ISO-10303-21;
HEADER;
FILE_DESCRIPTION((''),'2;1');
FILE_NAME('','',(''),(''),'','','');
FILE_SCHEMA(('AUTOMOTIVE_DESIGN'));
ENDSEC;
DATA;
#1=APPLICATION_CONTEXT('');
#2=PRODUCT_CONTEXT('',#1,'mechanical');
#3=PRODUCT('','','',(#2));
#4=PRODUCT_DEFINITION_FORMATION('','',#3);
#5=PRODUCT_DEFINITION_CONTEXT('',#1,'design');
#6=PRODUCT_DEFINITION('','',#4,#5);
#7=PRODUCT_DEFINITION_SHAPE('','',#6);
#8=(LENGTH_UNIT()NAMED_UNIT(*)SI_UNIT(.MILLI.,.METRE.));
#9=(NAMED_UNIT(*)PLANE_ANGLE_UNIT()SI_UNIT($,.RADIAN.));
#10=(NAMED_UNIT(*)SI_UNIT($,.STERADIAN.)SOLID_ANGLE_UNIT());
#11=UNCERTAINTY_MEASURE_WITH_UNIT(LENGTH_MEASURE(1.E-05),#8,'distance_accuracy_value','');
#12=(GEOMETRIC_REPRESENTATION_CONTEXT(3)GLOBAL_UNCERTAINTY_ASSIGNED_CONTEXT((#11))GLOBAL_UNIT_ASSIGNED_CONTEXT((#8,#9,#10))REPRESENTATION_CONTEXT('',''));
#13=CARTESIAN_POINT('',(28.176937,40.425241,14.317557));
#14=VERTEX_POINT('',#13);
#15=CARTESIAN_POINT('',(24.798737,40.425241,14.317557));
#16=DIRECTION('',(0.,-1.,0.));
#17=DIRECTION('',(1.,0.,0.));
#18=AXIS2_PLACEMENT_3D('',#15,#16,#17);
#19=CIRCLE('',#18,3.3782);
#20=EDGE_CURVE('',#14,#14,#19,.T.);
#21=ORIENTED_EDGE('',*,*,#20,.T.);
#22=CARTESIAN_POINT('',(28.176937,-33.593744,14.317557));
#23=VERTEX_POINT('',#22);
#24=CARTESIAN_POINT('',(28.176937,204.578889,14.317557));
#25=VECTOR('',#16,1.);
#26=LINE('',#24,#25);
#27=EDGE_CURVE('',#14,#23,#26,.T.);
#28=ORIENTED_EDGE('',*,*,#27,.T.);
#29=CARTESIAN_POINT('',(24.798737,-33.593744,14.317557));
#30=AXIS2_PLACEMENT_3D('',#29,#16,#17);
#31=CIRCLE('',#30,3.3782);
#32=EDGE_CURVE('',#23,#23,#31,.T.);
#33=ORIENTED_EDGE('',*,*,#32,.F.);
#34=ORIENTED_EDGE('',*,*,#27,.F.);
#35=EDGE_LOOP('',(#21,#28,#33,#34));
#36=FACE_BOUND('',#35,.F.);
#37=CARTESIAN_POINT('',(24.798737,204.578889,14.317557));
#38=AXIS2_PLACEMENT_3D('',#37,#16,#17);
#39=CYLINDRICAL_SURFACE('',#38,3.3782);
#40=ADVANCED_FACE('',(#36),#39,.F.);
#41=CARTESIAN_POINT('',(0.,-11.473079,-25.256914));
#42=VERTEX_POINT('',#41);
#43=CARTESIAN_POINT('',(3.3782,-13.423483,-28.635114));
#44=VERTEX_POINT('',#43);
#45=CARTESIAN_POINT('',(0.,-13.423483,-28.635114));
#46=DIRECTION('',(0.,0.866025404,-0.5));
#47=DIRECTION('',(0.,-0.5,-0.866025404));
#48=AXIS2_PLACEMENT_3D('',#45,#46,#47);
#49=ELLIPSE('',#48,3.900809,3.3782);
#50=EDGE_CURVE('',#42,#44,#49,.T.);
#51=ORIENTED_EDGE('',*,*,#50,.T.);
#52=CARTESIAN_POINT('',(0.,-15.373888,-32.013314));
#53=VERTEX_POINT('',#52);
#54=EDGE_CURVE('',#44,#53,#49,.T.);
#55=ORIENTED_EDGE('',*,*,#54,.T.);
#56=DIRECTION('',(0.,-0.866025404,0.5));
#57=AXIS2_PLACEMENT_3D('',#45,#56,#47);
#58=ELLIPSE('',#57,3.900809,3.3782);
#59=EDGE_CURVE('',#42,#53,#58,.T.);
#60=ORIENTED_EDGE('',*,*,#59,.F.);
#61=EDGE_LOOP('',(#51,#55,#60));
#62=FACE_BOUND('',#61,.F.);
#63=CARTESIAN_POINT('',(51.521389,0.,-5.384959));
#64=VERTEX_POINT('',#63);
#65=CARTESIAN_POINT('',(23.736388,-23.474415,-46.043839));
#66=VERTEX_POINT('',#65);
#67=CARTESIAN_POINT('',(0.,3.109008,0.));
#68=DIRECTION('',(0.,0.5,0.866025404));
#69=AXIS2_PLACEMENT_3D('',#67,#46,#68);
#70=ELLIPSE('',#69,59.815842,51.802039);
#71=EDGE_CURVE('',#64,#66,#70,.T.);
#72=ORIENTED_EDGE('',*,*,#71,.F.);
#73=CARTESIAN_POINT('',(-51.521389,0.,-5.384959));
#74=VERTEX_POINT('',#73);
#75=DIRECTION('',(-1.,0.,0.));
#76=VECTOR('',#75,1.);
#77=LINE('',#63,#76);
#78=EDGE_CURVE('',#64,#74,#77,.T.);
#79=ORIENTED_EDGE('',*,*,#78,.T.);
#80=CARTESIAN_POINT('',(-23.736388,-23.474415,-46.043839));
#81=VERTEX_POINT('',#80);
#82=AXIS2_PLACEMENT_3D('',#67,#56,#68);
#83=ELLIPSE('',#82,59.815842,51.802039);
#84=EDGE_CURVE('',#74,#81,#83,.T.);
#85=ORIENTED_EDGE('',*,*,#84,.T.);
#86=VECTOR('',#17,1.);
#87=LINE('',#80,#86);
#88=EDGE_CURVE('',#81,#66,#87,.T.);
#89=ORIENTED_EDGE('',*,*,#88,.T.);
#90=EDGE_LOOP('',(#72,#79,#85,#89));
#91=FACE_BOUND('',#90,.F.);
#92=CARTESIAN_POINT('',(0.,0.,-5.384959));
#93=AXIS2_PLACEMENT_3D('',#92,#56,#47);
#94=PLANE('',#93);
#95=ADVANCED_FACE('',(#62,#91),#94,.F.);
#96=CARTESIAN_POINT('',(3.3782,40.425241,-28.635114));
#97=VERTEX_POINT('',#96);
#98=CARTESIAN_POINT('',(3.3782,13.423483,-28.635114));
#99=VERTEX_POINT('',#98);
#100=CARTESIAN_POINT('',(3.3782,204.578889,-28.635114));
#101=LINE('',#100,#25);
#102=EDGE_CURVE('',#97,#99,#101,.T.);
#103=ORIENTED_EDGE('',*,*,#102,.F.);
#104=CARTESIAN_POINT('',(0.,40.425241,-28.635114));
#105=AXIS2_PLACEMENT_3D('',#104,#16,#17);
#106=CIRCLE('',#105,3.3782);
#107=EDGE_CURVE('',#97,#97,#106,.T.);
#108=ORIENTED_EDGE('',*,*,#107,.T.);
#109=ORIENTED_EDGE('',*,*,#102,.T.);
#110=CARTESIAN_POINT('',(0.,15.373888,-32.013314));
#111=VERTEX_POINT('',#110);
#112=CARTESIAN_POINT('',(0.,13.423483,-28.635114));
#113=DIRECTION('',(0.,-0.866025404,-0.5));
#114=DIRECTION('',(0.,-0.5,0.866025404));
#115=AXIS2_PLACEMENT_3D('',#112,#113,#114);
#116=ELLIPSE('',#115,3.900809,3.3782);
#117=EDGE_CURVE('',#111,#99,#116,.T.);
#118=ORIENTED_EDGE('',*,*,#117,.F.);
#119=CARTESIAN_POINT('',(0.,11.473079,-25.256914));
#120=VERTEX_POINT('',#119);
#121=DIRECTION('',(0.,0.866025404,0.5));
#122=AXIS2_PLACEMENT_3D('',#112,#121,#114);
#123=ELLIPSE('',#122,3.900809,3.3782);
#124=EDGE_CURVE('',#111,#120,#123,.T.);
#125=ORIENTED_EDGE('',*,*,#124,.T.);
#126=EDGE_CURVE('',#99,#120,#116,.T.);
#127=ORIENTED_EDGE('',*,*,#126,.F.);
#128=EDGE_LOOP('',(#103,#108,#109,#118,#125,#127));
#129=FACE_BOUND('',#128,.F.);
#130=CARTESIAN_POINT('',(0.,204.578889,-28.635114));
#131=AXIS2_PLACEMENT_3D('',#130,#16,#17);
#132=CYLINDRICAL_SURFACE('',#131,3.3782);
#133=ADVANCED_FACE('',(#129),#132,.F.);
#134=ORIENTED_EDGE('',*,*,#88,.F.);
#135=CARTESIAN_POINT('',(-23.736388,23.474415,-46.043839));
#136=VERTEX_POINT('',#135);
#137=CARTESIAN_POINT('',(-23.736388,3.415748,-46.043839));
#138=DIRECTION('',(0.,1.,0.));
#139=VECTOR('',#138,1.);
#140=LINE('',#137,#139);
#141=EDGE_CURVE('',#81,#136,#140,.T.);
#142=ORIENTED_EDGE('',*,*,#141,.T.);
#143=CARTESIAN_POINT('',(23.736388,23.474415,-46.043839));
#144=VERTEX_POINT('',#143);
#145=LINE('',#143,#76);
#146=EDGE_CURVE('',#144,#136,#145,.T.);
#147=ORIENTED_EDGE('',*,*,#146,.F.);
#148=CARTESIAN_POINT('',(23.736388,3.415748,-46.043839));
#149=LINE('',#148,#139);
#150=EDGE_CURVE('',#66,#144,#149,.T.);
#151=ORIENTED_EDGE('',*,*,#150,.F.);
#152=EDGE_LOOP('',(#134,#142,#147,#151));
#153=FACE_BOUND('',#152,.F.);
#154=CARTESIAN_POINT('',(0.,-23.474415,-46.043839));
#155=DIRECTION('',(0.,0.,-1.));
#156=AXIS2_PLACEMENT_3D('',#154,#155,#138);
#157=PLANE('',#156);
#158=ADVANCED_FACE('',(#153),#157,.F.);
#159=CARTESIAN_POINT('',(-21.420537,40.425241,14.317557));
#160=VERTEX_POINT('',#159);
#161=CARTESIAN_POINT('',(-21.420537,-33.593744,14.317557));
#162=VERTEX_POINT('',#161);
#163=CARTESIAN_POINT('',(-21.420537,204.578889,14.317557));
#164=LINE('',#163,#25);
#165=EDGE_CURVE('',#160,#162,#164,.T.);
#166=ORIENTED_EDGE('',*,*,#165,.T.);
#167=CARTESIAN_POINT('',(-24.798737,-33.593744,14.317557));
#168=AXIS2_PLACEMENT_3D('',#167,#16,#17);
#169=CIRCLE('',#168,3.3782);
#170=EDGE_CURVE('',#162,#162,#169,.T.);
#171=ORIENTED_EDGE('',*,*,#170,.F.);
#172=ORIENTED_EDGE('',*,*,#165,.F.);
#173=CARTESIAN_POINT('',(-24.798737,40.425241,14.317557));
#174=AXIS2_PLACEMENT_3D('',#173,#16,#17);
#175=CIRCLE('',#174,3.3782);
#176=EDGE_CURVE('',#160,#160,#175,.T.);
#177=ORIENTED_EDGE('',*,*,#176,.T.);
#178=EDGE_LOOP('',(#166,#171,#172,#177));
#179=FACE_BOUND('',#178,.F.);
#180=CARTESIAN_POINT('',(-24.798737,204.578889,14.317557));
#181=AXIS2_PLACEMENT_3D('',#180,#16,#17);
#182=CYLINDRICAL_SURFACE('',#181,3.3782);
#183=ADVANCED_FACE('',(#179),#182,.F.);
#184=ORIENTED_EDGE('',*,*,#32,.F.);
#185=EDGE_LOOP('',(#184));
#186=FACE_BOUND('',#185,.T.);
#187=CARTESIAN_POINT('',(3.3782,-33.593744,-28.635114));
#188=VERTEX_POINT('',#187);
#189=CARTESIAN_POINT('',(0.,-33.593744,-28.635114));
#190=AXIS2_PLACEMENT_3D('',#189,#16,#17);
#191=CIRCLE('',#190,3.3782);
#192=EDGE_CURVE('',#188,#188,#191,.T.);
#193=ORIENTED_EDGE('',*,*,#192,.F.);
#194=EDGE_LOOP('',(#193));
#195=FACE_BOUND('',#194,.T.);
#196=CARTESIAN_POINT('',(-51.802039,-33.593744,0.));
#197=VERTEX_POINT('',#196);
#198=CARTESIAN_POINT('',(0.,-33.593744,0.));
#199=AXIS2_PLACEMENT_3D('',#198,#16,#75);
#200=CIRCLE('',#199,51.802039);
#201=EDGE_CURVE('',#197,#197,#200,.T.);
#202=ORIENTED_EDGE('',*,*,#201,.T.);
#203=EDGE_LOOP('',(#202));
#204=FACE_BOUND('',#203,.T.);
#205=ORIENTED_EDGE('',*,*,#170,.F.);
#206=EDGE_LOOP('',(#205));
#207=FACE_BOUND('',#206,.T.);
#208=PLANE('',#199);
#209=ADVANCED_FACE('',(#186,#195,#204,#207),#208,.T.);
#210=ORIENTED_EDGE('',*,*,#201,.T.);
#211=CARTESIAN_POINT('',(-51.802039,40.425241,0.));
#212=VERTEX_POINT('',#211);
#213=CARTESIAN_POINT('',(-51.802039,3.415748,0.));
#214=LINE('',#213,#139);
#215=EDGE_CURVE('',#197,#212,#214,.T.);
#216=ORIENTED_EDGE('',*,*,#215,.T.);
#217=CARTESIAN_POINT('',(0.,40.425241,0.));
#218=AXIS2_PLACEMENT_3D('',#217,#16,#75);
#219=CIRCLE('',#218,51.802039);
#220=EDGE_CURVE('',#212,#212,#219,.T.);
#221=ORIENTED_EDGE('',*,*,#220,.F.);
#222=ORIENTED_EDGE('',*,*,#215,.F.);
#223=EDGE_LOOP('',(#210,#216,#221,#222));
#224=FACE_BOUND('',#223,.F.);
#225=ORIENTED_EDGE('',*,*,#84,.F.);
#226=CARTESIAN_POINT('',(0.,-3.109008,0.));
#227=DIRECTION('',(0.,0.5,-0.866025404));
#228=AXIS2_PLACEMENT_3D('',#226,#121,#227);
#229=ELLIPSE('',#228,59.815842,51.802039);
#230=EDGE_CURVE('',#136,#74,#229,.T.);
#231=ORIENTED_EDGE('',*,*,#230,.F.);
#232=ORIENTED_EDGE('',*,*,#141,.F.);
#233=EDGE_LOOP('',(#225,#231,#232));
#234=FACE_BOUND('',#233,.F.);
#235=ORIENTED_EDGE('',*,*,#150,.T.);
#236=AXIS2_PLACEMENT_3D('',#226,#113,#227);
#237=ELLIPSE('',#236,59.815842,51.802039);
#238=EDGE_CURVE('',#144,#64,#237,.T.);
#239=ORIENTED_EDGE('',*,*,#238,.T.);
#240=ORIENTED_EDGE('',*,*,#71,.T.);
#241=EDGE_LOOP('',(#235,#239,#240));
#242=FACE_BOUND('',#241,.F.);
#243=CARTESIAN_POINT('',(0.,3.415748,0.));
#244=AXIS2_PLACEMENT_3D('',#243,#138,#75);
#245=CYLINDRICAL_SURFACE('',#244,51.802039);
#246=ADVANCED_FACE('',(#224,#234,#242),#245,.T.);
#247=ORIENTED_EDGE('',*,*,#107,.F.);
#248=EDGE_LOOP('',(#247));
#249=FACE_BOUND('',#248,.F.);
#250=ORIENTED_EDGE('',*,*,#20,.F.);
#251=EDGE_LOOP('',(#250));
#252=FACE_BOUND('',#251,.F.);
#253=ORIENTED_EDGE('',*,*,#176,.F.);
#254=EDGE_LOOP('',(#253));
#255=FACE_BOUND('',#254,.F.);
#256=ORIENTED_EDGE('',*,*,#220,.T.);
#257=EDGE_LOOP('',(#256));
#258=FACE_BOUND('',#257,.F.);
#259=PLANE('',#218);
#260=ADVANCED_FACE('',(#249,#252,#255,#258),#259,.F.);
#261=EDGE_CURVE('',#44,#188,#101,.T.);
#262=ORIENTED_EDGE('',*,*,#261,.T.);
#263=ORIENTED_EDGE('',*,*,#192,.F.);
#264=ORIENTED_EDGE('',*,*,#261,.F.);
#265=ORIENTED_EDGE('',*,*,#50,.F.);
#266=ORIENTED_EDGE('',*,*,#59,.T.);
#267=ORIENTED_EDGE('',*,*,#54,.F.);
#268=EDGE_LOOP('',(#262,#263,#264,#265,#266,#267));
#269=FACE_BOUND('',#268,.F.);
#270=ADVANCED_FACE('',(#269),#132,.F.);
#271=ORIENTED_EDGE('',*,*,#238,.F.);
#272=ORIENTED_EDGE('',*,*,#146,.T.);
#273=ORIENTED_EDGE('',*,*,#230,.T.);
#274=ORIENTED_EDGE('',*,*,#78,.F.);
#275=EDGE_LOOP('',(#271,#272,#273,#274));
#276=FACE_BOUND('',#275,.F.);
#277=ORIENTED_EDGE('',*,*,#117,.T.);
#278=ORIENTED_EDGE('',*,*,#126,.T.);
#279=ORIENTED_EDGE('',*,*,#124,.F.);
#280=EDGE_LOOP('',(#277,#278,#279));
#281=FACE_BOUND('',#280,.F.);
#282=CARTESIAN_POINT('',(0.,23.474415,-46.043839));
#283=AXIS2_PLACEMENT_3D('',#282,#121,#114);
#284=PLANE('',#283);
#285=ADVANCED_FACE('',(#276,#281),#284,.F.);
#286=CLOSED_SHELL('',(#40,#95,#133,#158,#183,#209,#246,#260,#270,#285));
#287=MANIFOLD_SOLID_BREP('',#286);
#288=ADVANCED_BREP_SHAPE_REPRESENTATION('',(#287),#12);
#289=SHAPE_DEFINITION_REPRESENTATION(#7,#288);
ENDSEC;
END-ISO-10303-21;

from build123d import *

# Parameters (mm, degrees)
F0_W          = 51.8020391464
F0_H          = 74.018985033
F3_D          = 6.7564
F5_DEPTH      = 51.8030391464
F5_DEPTH_BACK = 51.8030391464


with BuildPart() as f1:
    # F0 (on Top) → F1 (revolve)
    with BuildSketch(Plane.XY):
        with Locations((-25.9010195732, 3.415748477)):
            Rectangle(F0_W, F0_H)
    revolve(axis=Axis((0, 3.415748477, 0), (0, -1, 0)))

    # F3 (through all)
    with Locations(Plane(origin=(0, 40.4252409935, 0), x_dir=(-1, 0, 0), z_dir=(0, 1, 0))):
        with Locations((-24.7987365379, 14.3175572157), (0, -28.6351144314), (24.7987365379, 14.3175572157)):
            Hole(F3_D / 2)

    # F4 (on Right) → F5 (cut, two sides)
    with BuildSketch(Plane.YZ) as f5_sk:
        Polygon((-23.4744153275, -46.0438393056), (23.4744153275, -46.0438393056), (0, -5.3849592805), align=None)
    extrude(amount=F5_DEPTH, mode=Mode.SUBTRACT)
    extrude(f5_sk.sketch, amount=-F5_DEPTH_BACK, mode=Mode.SUBTRACT)


solid = f1.part
